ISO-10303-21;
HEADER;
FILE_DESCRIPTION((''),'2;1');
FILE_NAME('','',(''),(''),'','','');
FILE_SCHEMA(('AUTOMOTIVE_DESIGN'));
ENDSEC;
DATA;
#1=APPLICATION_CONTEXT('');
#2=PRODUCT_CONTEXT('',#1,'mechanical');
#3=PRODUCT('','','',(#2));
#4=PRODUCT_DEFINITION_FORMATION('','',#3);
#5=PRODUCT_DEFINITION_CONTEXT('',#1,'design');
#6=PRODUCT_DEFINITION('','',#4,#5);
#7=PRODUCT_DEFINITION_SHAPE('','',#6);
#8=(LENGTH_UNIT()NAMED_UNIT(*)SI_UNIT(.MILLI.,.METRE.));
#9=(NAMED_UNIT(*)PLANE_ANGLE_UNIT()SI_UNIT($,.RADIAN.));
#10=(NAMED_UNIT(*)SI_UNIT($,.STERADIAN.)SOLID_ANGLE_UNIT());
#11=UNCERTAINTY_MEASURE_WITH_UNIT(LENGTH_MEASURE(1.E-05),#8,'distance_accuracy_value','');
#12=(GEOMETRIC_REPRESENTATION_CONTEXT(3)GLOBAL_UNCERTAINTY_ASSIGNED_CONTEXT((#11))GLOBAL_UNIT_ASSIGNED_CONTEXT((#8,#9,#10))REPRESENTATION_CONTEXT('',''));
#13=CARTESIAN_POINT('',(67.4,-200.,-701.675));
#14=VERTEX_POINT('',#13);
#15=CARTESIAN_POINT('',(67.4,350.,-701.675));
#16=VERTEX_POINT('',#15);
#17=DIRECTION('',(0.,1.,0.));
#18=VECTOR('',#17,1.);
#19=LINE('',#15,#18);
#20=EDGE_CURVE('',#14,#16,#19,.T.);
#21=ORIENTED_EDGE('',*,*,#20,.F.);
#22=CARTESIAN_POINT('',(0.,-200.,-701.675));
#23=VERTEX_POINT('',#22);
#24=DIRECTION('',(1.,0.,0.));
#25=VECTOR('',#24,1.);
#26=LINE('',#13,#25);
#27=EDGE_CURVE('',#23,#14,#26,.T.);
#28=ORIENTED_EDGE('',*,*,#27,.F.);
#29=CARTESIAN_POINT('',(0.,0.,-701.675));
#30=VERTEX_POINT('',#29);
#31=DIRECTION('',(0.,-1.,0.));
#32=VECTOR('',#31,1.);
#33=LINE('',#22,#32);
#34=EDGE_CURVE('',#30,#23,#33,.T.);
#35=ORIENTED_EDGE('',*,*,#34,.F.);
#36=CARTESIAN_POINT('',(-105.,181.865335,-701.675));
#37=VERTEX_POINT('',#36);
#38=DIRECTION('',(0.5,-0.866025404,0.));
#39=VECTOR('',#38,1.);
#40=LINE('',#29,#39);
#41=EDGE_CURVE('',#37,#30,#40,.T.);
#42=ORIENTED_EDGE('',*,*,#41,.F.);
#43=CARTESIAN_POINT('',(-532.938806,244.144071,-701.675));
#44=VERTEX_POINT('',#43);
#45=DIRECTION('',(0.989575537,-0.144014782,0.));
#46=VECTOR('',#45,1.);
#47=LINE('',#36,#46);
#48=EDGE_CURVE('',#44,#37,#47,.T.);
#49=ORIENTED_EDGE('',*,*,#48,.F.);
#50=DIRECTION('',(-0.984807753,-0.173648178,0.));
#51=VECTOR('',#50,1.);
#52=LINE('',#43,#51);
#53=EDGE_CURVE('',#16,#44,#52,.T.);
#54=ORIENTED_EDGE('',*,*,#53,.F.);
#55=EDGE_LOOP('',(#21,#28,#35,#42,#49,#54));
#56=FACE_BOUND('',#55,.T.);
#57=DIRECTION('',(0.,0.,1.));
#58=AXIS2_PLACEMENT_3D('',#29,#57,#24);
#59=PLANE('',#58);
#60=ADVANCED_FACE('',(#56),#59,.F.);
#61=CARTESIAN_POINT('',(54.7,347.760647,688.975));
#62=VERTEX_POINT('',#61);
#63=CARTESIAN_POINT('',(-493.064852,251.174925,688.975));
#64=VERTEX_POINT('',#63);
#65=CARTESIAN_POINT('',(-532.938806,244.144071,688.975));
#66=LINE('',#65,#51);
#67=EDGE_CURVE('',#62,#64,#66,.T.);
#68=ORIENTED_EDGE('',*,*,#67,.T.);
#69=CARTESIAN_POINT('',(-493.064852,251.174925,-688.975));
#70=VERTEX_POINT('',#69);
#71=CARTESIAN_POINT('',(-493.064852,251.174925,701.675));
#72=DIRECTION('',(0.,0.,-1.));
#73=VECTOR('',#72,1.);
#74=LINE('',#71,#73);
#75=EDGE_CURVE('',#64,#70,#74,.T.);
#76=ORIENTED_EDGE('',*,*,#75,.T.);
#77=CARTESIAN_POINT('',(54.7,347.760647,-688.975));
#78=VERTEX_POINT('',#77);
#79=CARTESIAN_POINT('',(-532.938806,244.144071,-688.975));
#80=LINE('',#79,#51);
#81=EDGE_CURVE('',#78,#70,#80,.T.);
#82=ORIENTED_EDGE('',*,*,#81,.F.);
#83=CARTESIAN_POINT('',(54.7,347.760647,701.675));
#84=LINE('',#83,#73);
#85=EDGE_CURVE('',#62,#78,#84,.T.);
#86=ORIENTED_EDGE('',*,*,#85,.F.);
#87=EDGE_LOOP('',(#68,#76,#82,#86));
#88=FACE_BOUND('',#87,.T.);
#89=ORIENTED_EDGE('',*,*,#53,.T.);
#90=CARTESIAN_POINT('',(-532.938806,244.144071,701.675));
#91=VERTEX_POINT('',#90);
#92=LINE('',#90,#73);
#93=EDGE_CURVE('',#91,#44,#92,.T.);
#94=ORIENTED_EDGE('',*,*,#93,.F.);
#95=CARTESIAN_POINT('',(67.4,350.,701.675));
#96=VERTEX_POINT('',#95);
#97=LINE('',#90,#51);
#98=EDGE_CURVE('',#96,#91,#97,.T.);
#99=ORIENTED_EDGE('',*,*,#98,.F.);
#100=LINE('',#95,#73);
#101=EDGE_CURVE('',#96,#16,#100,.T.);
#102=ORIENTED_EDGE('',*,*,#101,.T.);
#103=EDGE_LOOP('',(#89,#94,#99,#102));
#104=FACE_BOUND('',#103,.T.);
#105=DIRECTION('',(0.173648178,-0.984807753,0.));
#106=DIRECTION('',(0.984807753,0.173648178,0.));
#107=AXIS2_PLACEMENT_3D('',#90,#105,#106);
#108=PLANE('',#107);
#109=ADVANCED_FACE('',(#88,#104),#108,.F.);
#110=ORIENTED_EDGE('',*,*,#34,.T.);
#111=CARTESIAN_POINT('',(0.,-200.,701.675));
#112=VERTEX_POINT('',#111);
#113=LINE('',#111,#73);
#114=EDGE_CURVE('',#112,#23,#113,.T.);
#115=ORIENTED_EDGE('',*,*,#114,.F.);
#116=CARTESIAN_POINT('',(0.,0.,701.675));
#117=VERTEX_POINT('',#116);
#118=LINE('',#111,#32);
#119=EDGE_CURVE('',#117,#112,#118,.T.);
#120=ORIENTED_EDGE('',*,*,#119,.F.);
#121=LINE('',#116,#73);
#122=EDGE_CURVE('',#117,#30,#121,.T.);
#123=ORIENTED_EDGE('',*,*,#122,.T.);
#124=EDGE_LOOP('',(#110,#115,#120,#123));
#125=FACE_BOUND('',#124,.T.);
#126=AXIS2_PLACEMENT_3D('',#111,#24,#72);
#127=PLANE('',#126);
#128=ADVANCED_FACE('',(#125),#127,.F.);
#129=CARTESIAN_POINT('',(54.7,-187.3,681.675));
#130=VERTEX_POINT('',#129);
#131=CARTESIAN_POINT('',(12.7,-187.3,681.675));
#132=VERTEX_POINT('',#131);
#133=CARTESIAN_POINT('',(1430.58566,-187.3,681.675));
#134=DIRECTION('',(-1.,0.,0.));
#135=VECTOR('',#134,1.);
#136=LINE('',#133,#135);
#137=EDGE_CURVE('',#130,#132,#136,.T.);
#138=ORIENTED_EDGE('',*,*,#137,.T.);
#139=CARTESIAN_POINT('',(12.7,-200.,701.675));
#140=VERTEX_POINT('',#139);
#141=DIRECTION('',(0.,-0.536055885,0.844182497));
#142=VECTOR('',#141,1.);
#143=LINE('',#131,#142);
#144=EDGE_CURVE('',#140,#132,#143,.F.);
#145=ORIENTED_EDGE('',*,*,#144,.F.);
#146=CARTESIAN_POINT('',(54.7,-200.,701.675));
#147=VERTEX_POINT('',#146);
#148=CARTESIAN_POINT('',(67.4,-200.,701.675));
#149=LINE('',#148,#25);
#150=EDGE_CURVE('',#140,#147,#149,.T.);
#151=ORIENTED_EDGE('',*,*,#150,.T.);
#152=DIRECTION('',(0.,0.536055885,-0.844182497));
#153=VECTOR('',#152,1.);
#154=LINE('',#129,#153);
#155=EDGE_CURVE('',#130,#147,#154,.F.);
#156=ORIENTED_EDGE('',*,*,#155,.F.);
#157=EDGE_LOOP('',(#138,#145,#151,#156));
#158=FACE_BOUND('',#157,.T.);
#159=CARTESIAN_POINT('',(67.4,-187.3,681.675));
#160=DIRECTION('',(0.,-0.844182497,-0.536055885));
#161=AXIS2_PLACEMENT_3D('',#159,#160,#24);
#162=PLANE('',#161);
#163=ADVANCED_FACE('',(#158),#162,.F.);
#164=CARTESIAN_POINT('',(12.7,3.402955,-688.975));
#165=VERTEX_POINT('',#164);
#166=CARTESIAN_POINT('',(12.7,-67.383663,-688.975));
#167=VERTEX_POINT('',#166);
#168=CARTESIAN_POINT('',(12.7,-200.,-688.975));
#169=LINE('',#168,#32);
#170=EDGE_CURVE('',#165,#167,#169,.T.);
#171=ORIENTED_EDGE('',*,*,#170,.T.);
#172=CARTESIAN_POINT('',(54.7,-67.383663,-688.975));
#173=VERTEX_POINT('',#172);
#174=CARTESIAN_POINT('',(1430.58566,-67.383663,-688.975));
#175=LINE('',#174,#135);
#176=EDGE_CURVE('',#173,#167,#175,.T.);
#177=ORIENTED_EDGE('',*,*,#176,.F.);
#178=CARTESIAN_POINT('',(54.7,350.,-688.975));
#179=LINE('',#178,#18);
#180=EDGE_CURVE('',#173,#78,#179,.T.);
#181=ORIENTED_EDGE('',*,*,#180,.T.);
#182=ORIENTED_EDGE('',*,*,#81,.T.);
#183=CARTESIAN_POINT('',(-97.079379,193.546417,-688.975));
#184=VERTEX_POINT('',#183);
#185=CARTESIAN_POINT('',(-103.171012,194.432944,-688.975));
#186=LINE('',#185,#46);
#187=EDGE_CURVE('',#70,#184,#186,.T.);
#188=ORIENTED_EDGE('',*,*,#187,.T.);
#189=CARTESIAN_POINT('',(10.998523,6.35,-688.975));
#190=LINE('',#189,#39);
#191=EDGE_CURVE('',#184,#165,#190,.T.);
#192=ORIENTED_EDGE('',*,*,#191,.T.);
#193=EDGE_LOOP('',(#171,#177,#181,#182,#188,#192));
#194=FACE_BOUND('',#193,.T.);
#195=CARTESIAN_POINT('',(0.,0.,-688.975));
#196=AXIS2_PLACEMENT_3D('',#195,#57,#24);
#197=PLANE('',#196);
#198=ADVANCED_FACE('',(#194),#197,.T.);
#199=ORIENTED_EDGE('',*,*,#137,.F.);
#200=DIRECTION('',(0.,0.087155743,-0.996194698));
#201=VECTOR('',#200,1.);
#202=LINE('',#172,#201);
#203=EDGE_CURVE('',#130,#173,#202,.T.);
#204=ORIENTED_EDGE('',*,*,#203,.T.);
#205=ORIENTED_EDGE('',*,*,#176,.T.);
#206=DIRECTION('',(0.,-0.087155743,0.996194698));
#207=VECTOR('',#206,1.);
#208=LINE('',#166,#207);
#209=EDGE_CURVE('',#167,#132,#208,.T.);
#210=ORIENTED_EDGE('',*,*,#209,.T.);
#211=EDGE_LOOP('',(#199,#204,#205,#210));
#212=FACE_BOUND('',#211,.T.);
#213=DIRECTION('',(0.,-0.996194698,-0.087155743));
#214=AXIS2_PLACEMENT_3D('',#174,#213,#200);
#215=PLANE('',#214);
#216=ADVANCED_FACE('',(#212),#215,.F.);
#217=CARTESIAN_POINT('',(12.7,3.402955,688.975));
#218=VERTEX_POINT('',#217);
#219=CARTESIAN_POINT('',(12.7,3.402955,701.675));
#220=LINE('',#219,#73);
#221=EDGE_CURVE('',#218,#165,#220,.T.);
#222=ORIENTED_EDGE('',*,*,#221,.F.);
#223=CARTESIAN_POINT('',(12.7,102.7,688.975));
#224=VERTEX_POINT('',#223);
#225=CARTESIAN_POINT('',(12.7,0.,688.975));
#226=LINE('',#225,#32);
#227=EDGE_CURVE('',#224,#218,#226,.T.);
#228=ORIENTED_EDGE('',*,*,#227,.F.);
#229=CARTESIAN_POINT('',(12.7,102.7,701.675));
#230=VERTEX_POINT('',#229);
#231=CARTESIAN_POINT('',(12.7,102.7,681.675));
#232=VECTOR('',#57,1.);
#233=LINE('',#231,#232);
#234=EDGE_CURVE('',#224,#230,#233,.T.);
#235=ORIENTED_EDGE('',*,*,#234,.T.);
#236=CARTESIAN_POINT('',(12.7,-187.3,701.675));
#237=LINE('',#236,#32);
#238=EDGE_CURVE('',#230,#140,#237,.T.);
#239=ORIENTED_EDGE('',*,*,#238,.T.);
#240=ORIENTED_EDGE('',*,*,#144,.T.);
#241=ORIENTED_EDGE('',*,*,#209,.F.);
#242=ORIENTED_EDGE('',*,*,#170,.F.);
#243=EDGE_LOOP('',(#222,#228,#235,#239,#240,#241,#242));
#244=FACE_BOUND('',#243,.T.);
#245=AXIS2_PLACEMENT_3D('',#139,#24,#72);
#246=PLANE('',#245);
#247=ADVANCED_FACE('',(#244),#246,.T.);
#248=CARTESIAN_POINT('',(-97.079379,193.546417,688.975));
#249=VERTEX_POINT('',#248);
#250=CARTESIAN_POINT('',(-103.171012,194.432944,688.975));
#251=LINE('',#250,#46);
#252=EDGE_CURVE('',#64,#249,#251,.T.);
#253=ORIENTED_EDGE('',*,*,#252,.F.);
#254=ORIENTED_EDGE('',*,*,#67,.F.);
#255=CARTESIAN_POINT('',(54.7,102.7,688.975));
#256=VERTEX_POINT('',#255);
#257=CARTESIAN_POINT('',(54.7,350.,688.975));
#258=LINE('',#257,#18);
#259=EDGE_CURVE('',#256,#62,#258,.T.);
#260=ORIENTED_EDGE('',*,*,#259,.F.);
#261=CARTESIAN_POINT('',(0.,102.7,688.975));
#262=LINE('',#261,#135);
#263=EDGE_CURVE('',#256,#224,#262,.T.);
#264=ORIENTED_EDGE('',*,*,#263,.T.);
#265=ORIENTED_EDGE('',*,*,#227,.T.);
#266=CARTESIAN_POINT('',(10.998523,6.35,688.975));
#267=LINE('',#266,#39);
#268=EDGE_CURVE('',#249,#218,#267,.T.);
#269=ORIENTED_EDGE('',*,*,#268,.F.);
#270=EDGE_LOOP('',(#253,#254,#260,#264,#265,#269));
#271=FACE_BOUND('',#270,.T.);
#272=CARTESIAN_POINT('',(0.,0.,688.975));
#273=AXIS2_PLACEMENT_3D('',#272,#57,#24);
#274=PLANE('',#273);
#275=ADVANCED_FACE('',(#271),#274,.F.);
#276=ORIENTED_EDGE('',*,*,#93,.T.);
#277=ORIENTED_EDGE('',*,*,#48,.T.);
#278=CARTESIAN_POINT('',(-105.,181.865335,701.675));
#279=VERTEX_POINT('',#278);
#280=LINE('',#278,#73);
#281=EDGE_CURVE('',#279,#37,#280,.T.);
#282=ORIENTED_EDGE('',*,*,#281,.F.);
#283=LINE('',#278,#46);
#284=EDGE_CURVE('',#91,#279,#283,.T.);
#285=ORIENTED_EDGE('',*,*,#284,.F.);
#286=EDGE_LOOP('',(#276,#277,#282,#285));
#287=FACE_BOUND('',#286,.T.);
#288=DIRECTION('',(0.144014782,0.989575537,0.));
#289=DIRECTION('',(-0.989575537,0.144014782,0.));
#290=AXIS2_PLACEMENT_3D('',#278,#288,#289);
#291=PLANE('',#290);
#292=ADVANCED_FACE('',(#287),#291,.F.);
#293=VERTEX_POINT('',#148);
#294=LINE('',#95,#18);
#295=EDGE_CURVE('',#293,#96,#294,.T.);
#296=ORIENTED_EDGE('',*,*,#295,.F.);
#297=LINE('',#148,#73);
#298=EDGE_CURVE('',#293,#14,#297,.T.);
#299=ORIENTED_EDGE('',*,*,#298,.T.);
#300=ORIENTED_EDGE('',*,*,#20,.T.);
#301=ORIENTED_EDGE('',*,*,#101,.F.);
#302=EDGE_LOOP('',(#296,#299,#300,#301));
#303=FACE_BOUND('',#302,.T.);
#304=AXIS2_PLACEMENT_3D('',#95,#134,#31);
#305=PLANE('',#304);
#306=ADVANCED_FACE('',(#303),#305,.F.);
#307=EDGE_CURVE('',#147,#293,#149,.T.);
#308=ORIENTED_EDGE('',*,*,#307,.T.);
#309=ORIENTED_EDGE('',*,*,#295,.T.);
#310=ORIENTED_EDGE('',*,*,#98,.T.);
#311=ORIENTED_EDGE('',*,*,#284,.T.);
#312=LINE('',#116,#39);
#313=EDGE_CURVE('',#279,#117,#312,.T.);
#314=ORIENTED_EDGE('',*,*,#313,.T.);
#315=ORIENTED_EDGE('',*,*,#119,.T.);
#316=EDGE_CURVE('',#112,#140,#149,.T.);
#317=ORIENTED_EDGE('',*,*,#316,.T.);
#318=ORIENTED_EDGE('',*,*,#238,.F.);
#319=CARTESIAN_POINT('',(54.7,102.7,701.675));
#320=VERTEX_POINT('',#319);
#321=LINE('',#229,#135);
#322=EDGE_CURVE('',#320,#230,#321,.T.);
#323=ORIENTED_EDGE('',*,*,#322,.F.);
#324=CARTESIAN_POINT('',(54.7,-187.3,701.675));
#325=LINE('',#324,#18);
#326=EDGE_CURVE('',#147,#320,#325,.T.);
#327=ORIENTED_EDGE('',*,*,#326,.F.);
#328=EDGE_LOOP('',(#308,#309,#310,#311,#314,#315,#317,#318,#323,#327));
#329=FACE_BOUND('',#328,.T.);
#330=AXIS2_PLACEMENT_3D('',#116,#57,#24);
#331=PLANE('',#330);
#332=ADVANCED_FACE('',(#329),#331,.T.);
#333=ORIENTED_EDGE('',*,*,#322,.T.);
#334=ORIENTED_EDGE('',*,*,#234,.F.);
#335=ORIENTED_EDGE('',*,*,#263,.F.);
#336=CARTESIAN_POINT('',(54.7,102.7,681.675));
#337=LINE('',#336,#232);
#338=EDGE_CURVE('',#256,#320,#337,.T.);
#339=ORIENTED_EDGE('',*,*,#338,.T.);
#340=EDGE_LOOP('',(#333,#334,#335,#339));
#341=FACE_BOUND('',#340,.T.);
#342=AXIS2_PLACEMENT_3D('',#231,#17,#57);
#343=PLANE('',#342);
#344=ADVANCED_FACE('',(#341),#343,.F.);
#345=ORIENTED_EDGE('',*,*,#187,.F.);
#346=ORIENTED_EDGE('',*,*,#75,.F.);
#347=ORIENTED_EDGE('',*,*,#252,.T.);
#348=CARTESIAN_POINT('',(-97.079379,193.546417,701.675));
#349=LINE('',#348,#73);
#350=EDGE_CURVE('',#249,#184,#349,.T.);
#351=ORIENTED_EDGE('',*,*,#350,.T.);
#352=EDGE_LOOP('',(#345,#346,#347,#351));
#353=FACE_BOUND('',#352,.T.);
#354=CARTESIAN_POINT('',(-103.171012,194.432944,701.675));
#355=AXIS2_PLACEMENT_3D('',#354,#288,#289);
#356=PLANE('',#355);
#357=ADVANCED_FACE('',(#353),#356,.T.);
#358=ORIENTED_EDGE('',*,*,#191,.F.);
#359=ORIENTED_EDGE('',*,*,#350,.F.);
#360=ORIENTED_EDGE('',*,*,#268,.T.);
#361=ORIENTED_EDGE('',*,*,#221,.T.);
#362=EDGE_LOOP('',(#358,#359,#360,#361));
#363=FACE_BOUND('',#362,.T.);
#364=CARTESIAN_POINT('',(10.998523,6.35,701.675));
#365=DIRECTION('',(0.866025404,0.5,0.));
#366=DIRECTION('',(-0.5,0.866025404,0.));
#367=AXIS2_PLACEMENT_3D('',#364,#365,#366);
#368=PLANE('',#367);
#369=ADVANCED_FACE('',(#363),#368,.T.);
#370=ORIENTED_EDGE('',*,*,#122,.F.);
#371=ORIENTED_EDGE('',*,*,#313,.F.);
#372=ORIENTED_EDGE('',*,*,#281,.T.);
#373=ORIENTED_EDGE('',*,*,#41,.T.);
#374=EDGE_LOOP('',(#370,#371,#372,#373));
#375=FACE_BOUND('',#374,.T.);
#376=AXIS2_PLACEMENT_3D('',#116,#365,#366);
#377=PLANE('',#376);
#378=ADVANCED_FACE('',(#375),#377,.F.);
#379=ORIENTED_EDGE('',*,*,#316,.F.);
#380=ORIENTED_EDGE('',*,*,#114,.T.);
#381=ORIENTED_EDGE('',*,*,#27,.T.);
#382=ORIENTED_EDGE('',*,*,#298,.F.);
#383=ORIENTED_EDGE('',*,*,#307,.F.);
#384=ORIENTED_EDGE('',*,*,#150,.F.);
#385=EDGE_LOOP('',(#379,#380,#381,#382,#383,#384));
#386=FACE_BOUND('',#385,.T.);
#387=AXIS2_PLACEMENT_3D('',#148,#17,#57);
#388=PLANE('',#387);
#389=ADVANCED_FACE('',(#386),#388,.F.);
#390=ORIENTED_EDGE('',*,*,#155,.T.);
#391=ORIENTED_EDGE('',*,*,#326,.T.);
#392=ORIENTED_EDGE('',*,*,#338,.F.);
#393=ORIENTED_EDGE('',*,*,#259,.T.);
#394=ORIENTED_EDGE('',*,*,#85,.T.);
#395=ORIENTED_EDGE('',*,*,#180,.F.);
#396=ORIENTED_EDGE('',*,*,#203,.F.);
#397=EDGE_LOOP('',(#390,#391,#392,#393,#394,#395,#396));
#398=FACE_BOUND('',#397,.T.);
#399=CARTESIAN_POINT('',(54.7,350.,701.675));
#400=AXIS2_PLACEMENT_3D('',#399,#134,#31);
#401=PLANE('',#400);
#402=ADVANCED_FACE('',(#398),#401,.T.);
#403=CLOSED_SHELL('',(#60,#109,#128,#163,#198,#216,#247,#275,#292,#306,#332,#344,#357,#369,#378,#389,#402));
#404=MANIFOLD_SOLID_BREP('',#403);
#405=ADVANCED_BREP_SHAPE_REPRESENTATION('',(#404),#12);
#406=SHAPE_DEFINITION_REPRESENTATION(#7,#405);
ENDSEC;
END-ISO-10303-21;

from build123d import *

# Parameters (mm, degrees)
BOSS_EXTRUDE1_DEPTH = 701.675
SHELL1_T            = -12.7
SKETCH3_W           = 42
SKETCH3_H           = 290
CUT_EXTRUDE1_DEPTH  = 20
BOSS_EXTRUDE2_REACH = 957.285
CHAMFER1_SIZE       = 12.7
CHAMFER1_SIZE_2     = 20


with BuildPart() as part:
    # Sketch2 → Boss-Extrude1 (new, symmetric)
    with BuildSketch(Plane.XY):
        Polygon((0, 0), (-105, 181.865334795), (-532.938806236, 244.144070894), (67.4, 350), (67.4, -200), (0, -200), align=None)
    extrude(amount=BOSS_EXTRUDE1_DEPTH, both=True)

    # Shell1
    shell1_openings = [part.faces().sort_by_distance(p)[0] for p in [
        (-232.769403118, 297.072035447, 0),
    ]]
    offset(amount=SHELL1_T, openings=shell1_openings, kind=Kind.INTERSECTION)

    # Sketch3 → Cut-Extrude1 (cut)
    with BuildSketch(Plane.XY.offset(701.675)):
        with Locations((33.7, -42.3)):
            Rectangle(SKETCH3_W, SKETCH3_H)
    extrude(amount=-CUT_EXTRUDE1_DEPTH, mode=Mode.SUBTRACT)

    # Sketch4 → Boss-Extrude2 (add, up to next)
    with BuildSketch(Plane(origin=(12.7, 0, 0), x_dir=(0, 0, -1), z_dir=(1, 0, 0)), mode=Mode.PRIVATE) as boss_extrude2_sk1:
        Polygon((688.975, -187.3), (688.975, -67.383663338), (-681.675, -187.3), align=None)
    boss_extrude2_tool1 = extrude(boss_extrude2_sk1.sketch, amount=BOSS_EXTRUDE2_REACH, mode=Mode.PRIVATE) - part.part
    add(boss_extrude2_tool1.solids().sort_by_distance((12.7, -147.327888, -232.091667))[0])

    # Chamfer1
    # the kernel refuses this chamfer: 20, 12.7 mm, written as the material it adds along each edge
    # the kernel refuses this chamfer: 20, 12.7 mm, written as the material it takes off along each edge
    with BuildSketch(Plane(origin=(12.7, -187.3, 701.675), x_dir=(0, -0.9986795899881412, 0.05137194313161755), z_dir=(1, 0, 0))) as chamfer1_2_piece_1:
        Polygon((CHAMFER1_SIZE * 0.998679589988, CHAMFER1_SIZE * 0.0513719431316), (-CHAMFER1_SIZE_2 * 0.0513719431316, CHAMFER1_SIZE_2 * 0.998679589988), (0, 0), align=None)
    extrude(amount=42, mode=Mode.SUBTRACT)


solid = part.part
